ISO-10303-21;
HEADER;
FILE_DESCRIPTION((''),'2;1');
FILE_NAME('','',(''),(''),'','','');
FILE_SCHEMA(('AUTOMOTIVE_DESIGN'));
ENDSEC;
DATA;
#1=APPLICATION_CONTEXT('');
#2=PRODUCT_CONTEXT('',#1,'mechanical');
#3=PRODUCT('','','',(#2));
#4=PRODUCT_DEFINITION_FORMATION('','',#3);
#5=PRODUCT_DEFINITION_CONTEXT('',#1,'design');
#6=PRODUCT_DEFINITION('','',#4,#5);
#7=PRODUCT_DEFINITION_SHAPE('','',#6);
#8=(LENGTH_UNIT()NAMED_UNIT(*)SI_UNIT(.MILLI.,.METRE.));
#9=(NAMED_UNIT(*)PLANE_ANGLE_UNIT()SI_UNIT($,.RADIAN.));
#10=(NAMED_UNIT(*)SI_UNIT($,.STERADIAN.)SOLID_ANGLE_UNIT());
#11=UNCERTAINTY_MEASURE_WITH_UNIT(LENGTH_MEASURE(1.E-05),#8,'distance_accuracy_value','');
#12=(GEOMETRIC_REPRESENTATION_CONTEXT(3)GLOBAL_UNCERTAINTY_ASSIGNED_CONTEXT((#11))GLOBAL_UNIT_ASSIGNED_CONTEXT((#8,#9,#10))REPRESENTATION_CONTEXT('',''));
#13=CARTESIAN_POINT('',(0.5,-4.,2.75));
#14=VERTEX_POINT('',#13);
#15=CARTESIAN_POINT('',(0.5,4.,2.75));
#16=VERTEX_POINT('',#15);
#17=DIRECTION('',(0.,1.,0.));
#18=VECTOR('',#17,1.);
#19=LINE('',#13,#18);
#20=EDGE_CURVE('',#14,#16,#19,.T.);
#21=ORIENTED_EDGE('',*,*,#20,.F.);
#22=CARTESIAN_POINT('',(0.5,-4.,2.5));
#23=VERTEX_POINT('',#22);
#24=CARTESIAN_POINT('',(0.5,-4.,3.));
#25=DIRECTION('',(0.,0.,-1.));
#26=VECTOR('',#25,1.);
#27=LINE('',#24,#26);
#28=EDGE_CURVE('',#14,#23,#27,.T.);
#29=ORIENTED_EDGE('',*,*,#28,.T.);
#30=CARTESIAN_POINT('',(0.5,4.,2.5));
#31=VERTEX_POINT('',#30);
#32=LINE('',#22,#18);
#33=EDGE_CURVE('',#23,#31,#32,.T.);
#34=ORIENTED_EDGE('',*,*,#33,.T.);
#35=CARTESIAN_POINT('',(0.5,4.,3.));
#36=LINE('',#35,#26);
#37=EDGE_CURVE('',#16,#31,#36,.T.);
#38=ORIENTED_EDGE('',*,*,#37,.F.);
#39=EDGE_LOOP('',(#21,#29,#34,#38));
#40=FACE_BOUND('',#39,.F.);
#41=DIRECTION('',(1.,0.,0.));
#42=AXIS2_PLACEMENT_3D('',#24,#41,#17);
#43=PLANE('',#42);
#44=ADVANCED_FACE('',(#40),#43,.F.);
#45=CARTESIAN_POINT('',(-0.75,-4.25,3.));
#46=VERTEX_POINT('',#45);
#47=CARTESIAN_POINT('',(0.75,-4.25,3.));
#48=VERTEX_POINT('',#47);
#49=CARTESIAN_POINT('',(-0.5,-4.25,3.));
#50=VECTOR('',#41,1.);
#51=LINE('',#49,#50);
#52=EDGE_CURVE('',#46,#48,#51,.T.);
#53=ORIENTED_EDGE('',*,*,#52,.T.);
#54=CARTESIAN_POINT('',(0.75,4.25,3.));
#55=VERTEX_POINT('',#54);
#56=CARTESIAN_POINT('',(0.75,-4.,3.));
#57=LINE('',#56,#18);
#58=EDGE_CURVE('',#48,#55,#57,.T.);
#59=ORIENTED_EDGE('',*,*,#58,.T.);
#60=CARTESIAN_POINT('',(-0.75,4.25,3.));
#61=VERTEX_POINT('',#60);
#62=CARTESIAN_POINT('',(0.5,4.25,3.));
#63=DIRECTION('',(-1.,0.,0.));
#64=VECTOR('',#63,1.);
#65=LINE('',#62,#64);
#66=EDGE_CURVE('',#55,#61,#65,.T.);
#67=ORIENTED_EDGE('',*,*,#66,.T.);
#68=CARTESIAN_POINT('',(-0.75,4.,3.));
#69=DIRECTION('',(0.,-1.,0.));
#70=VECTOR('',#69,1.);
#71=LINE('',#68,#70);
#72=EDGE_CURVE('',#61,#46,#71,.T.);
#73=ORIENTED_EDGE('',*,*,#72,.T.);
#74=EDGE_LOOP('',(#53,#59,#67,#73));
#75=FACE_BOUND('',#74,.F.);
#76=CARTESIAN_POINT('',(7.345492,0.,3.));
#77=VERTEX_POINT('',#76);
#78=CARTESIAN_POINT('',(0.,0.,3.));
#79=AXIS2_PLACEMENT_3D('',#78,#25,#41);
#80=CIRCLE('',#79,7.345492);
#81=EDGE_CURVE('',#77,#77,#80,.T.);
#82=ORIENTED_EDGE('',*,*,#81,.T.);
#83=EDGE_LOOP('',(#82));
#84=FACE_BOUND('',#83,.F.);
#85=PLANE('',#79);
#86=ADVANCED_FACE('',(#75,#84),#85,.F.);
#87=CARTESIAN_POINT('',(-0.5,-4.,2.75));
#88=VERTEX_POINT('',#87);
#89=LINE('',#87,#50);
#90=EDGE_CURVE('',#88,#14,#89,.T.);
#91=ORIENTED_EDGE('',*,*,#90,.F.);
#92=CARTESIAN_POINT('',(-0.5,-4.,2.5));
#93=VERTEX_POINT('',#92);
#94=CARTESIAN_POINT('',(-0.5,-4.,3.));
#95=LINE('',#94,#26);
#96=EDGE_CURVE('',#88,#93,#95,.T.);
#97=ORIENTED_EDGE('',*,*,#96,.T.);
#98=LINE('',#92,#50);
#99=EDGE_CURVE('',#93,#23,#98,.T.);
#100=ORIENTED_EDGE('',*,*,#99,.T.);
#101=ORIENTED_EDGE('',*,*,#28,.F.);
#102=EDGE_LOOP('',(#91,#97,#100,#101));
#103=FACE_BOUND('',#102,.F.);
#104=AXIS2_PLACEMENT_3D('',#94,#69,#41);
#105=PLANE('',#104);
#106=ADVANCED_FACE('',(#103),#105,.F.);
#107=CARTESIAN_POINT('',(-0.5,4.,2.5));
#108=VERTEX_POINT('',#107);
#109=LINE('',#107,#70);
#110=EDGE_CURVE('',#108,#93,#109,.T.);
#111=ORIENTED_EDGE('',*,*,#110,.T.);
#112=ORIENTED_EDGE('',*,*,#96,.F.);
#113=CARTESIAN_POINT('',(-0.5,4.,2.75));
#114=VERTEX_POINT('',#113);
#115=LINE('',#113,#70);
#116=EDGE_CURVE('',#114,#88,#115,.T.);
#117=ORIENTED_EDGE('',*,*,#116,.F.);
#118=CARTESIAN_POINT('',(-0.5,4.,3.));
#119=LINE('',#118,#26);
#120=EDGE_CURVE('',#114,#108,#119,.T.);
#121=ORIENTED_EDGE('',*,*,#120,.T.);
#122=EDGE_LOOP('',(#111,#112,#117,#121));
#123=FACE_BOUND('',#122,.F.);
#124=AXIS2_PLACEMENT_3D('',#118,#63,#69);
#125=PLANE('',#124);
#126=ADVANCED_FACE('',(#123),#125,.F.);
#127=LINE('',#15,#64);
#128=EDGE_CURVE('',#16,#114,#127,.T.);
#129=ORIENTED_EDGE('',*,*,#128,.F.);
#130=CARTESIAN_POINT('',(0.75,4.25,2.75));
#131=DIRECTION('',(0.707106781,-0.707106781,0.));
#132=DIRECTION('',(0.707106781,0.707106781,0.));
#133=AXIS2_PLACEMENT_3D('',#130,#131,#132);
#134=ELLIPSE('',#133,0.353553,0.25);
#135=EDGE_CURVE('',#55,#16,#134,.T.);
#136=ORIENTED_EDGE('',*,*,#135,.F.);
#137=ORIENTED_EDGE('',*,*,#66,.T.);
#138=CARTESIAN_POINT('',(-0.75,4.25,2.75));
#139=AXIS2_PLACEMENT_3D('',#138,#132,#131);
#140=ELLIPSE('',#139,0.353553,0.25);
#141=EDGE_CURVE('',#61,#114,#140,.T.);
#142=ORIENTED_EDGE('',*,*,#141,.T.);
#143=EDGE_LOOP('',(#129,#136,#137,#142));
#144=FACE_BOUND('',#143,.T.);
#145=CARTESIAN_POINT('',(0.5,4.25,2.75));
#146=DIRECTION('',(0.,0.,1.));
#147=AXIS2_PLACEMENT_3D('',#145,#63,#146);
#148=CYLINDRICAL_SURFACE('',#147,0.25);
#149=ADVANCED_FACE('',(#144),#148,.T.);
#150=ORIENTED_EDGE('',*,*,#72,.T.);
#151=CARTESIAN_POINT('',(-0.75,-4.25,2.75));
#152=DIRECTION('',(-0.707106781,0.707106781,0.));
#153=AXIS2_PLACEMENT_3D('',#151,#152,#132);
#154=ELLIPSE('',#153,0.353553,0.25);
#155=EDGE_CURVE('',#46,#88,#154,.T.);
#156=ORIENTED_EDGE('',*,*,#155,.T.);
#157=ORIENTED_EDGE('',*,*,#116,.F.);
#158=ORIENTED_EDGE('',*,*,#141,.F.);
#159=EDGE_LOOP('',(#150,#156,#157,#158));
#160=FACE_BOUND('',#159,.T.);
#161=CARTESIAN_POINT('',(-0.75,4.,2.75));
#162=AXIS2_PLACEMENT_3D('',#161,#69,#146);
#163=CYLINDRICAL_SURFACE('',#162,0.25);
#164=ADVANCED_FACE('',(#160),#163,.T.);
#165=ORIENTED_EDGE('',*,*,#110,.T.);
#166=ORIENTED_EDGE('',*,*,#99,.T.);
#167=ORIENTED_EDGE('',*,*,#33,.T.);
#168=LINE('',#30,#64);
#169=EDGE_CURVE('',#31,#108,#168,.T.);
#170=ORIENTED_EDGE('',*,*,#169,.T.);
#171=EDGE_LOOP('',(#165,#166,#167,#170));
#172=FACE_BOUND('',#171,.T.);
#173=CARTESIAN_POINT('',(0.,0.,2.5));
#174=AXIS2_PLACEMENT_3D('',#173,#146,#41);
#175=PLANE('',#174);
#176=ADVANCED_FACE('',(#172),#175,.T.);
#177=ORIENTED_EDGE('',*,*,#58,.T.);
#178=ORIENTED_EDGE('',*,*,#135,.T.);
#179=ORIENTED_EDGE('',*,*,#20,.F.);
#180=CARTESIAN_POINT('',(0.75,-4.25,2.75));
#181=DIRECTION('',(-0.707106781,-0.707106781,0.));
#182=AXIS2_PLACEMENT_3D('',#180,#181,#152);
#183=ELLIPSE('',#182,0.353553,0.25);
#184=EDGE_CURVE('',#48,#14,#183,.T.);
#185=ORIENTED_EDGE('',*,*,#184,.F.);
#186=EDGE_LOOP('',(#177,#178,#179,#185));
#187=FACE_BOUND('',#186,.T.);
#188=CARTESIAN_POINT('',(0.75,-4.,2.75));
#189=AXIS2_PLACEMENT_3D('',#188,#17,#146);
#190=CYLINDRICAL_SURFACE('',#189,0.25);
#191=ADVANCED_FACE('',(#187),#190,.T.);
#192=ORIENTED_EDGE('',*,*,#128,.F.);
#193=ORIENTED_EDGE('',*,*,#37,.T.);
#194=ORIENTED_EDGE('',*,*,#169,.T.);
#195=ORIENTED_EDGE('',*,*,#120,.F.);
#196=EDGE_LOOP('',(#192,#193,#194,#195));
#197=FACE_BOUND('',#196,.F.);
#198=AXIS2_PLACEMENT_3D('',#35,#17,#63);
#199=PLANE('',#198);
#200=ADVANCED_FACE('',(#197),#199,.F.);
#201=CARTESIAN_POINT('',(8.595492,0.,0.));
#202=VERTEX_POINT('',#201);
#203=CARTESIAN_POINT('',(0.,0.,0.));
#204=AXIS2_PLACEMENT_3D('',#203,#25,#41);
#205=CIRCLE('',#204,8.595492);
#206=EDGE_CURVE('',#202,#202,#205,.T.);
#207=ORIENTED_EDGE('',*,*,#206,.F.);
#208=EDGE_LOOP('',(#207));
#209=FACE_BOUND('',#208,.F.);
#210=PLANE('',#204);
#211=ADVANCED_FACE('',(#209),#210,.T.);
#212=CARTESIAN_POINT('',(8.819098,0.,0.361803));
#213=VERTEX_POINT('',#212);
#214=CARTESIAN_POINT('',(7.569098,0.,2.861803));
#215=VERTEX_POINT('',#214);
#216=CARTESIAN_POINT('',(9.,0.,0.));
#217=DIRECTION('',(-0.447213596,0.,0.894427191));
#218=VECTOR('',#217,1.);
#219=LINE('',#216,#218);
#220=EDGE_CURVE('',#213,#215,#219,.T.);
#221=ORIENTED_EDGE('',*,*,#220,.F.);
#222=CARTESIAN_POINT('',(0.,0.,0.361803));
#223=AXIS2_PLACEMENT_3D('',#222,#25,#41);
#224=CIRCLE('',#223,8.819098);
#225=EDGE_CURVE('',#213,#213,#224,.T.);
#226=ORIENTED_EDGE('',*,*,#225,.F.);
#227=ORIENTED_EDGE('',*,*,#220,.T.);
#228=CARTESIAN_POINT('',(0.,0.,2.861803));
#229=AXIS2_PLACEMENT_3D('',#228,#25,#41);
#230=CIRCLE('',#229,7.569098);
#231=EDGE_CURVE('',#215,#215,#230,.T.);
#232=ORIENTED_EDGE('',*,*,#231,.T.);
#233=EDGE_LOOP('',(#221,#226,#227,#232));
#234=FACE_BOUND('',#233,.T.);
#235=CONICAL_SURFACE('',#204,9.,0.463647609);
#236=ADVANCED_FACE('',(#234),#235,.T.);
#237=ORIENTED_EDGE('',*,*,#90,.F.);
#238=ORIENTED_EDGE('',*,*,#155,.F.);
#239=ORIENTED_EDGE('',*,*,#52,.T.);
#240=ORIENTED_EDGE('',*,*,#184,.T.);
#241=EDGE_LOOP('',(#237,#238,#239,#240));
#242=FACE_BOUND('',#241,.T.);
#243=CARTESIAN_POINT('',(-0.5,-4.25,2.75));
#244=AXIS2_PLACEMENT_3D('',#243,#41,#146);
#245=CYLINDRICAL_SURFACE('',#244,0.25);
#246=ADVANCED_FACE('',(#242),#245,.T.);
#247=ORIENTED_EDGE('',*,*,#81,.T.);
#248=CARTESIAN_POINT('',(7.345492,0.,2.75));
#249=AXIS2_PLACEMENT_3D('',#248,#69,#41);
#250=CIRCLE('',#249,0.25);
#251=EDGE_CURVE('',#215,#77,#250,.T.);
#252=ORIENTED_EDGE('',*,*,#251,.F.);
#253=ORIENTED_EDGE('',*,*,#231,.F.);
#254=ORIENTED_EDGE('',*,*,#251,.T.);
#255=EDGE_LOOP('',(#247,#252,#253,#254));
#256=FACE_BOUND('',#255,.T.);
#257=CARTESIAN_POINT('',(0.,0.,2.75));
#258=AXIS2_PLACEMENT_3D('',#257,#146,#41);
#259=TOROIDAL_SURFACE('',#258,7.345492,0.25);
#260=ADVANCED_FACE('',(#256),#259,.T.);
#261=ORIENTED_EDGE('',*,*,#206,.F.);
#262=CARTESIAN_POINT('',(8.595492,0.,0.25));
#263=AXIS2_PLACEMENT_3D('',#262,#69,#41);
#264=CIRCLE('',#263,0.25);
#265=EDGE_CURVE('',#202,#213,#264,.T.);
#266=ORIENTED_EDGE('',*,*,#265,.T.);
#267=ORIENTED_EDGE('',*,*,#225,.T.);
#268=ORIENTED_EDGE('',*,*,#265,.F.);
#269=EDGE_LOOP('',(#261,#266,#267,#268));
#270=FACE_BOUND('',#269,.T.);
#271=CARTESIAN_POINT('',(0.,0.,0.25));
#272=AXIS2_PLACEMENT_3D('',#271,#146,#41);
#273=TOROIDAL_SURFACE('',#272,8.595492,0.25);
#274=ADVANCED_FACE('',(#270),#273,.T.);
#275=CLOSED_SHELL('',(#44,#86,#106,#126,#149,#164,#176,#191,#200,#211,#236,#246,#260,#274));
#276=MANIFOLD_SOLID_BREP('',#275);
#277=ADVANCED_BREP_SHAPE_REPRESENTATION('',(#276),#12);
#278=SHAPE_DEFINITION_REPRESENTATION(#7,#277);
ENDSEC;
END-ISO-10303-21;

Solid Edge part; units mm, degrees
sketch "Sketch1" plane through (0, 0, 0) normal (0, -1, 0) x (1, 0, 0)
  line L0 (0, 0) -> (9, 0)
  line L1 (9, 0) -> (7.5, 3)
  line L2 (7.5, 3) -> (0, 3)
  dimension "D1" = 9
  dimension "D2" = 3
  dimension "D3" = 7.5
revolve "RevolvedProtrusion1" add sketch "Sketch1" angle 360 about axis through (0, 0, 3) along (0, 0, -1)
sketch "Sketch2" plane through (0, 0, 3) normal (0, 0, 1) x (1, 0, 0)
  line L0 (-0.5, -4) -> (0.5, -4)
  line L1 (0.5, -4) -> (0.5, 4)
  line L2 (0.5, 4) -> (-0.5, 4)
  line L3 (-0.5, 4) -> (-0.5, -4)
  dimension "D1" = 1
  dimension "D2" = 8
extrude "Cutout1" cut sketch "Sketch2" against normal blind 0.5
fillet "main_rounds" radius 0.25 6 edges at (-9, 0, 0) (-7.5, 0, 3) (0.5, 0, 3) (0, -4, 3) (-0.5, 0, 3) (0, 4, 3)
properties material "Polyethylene, low density"
